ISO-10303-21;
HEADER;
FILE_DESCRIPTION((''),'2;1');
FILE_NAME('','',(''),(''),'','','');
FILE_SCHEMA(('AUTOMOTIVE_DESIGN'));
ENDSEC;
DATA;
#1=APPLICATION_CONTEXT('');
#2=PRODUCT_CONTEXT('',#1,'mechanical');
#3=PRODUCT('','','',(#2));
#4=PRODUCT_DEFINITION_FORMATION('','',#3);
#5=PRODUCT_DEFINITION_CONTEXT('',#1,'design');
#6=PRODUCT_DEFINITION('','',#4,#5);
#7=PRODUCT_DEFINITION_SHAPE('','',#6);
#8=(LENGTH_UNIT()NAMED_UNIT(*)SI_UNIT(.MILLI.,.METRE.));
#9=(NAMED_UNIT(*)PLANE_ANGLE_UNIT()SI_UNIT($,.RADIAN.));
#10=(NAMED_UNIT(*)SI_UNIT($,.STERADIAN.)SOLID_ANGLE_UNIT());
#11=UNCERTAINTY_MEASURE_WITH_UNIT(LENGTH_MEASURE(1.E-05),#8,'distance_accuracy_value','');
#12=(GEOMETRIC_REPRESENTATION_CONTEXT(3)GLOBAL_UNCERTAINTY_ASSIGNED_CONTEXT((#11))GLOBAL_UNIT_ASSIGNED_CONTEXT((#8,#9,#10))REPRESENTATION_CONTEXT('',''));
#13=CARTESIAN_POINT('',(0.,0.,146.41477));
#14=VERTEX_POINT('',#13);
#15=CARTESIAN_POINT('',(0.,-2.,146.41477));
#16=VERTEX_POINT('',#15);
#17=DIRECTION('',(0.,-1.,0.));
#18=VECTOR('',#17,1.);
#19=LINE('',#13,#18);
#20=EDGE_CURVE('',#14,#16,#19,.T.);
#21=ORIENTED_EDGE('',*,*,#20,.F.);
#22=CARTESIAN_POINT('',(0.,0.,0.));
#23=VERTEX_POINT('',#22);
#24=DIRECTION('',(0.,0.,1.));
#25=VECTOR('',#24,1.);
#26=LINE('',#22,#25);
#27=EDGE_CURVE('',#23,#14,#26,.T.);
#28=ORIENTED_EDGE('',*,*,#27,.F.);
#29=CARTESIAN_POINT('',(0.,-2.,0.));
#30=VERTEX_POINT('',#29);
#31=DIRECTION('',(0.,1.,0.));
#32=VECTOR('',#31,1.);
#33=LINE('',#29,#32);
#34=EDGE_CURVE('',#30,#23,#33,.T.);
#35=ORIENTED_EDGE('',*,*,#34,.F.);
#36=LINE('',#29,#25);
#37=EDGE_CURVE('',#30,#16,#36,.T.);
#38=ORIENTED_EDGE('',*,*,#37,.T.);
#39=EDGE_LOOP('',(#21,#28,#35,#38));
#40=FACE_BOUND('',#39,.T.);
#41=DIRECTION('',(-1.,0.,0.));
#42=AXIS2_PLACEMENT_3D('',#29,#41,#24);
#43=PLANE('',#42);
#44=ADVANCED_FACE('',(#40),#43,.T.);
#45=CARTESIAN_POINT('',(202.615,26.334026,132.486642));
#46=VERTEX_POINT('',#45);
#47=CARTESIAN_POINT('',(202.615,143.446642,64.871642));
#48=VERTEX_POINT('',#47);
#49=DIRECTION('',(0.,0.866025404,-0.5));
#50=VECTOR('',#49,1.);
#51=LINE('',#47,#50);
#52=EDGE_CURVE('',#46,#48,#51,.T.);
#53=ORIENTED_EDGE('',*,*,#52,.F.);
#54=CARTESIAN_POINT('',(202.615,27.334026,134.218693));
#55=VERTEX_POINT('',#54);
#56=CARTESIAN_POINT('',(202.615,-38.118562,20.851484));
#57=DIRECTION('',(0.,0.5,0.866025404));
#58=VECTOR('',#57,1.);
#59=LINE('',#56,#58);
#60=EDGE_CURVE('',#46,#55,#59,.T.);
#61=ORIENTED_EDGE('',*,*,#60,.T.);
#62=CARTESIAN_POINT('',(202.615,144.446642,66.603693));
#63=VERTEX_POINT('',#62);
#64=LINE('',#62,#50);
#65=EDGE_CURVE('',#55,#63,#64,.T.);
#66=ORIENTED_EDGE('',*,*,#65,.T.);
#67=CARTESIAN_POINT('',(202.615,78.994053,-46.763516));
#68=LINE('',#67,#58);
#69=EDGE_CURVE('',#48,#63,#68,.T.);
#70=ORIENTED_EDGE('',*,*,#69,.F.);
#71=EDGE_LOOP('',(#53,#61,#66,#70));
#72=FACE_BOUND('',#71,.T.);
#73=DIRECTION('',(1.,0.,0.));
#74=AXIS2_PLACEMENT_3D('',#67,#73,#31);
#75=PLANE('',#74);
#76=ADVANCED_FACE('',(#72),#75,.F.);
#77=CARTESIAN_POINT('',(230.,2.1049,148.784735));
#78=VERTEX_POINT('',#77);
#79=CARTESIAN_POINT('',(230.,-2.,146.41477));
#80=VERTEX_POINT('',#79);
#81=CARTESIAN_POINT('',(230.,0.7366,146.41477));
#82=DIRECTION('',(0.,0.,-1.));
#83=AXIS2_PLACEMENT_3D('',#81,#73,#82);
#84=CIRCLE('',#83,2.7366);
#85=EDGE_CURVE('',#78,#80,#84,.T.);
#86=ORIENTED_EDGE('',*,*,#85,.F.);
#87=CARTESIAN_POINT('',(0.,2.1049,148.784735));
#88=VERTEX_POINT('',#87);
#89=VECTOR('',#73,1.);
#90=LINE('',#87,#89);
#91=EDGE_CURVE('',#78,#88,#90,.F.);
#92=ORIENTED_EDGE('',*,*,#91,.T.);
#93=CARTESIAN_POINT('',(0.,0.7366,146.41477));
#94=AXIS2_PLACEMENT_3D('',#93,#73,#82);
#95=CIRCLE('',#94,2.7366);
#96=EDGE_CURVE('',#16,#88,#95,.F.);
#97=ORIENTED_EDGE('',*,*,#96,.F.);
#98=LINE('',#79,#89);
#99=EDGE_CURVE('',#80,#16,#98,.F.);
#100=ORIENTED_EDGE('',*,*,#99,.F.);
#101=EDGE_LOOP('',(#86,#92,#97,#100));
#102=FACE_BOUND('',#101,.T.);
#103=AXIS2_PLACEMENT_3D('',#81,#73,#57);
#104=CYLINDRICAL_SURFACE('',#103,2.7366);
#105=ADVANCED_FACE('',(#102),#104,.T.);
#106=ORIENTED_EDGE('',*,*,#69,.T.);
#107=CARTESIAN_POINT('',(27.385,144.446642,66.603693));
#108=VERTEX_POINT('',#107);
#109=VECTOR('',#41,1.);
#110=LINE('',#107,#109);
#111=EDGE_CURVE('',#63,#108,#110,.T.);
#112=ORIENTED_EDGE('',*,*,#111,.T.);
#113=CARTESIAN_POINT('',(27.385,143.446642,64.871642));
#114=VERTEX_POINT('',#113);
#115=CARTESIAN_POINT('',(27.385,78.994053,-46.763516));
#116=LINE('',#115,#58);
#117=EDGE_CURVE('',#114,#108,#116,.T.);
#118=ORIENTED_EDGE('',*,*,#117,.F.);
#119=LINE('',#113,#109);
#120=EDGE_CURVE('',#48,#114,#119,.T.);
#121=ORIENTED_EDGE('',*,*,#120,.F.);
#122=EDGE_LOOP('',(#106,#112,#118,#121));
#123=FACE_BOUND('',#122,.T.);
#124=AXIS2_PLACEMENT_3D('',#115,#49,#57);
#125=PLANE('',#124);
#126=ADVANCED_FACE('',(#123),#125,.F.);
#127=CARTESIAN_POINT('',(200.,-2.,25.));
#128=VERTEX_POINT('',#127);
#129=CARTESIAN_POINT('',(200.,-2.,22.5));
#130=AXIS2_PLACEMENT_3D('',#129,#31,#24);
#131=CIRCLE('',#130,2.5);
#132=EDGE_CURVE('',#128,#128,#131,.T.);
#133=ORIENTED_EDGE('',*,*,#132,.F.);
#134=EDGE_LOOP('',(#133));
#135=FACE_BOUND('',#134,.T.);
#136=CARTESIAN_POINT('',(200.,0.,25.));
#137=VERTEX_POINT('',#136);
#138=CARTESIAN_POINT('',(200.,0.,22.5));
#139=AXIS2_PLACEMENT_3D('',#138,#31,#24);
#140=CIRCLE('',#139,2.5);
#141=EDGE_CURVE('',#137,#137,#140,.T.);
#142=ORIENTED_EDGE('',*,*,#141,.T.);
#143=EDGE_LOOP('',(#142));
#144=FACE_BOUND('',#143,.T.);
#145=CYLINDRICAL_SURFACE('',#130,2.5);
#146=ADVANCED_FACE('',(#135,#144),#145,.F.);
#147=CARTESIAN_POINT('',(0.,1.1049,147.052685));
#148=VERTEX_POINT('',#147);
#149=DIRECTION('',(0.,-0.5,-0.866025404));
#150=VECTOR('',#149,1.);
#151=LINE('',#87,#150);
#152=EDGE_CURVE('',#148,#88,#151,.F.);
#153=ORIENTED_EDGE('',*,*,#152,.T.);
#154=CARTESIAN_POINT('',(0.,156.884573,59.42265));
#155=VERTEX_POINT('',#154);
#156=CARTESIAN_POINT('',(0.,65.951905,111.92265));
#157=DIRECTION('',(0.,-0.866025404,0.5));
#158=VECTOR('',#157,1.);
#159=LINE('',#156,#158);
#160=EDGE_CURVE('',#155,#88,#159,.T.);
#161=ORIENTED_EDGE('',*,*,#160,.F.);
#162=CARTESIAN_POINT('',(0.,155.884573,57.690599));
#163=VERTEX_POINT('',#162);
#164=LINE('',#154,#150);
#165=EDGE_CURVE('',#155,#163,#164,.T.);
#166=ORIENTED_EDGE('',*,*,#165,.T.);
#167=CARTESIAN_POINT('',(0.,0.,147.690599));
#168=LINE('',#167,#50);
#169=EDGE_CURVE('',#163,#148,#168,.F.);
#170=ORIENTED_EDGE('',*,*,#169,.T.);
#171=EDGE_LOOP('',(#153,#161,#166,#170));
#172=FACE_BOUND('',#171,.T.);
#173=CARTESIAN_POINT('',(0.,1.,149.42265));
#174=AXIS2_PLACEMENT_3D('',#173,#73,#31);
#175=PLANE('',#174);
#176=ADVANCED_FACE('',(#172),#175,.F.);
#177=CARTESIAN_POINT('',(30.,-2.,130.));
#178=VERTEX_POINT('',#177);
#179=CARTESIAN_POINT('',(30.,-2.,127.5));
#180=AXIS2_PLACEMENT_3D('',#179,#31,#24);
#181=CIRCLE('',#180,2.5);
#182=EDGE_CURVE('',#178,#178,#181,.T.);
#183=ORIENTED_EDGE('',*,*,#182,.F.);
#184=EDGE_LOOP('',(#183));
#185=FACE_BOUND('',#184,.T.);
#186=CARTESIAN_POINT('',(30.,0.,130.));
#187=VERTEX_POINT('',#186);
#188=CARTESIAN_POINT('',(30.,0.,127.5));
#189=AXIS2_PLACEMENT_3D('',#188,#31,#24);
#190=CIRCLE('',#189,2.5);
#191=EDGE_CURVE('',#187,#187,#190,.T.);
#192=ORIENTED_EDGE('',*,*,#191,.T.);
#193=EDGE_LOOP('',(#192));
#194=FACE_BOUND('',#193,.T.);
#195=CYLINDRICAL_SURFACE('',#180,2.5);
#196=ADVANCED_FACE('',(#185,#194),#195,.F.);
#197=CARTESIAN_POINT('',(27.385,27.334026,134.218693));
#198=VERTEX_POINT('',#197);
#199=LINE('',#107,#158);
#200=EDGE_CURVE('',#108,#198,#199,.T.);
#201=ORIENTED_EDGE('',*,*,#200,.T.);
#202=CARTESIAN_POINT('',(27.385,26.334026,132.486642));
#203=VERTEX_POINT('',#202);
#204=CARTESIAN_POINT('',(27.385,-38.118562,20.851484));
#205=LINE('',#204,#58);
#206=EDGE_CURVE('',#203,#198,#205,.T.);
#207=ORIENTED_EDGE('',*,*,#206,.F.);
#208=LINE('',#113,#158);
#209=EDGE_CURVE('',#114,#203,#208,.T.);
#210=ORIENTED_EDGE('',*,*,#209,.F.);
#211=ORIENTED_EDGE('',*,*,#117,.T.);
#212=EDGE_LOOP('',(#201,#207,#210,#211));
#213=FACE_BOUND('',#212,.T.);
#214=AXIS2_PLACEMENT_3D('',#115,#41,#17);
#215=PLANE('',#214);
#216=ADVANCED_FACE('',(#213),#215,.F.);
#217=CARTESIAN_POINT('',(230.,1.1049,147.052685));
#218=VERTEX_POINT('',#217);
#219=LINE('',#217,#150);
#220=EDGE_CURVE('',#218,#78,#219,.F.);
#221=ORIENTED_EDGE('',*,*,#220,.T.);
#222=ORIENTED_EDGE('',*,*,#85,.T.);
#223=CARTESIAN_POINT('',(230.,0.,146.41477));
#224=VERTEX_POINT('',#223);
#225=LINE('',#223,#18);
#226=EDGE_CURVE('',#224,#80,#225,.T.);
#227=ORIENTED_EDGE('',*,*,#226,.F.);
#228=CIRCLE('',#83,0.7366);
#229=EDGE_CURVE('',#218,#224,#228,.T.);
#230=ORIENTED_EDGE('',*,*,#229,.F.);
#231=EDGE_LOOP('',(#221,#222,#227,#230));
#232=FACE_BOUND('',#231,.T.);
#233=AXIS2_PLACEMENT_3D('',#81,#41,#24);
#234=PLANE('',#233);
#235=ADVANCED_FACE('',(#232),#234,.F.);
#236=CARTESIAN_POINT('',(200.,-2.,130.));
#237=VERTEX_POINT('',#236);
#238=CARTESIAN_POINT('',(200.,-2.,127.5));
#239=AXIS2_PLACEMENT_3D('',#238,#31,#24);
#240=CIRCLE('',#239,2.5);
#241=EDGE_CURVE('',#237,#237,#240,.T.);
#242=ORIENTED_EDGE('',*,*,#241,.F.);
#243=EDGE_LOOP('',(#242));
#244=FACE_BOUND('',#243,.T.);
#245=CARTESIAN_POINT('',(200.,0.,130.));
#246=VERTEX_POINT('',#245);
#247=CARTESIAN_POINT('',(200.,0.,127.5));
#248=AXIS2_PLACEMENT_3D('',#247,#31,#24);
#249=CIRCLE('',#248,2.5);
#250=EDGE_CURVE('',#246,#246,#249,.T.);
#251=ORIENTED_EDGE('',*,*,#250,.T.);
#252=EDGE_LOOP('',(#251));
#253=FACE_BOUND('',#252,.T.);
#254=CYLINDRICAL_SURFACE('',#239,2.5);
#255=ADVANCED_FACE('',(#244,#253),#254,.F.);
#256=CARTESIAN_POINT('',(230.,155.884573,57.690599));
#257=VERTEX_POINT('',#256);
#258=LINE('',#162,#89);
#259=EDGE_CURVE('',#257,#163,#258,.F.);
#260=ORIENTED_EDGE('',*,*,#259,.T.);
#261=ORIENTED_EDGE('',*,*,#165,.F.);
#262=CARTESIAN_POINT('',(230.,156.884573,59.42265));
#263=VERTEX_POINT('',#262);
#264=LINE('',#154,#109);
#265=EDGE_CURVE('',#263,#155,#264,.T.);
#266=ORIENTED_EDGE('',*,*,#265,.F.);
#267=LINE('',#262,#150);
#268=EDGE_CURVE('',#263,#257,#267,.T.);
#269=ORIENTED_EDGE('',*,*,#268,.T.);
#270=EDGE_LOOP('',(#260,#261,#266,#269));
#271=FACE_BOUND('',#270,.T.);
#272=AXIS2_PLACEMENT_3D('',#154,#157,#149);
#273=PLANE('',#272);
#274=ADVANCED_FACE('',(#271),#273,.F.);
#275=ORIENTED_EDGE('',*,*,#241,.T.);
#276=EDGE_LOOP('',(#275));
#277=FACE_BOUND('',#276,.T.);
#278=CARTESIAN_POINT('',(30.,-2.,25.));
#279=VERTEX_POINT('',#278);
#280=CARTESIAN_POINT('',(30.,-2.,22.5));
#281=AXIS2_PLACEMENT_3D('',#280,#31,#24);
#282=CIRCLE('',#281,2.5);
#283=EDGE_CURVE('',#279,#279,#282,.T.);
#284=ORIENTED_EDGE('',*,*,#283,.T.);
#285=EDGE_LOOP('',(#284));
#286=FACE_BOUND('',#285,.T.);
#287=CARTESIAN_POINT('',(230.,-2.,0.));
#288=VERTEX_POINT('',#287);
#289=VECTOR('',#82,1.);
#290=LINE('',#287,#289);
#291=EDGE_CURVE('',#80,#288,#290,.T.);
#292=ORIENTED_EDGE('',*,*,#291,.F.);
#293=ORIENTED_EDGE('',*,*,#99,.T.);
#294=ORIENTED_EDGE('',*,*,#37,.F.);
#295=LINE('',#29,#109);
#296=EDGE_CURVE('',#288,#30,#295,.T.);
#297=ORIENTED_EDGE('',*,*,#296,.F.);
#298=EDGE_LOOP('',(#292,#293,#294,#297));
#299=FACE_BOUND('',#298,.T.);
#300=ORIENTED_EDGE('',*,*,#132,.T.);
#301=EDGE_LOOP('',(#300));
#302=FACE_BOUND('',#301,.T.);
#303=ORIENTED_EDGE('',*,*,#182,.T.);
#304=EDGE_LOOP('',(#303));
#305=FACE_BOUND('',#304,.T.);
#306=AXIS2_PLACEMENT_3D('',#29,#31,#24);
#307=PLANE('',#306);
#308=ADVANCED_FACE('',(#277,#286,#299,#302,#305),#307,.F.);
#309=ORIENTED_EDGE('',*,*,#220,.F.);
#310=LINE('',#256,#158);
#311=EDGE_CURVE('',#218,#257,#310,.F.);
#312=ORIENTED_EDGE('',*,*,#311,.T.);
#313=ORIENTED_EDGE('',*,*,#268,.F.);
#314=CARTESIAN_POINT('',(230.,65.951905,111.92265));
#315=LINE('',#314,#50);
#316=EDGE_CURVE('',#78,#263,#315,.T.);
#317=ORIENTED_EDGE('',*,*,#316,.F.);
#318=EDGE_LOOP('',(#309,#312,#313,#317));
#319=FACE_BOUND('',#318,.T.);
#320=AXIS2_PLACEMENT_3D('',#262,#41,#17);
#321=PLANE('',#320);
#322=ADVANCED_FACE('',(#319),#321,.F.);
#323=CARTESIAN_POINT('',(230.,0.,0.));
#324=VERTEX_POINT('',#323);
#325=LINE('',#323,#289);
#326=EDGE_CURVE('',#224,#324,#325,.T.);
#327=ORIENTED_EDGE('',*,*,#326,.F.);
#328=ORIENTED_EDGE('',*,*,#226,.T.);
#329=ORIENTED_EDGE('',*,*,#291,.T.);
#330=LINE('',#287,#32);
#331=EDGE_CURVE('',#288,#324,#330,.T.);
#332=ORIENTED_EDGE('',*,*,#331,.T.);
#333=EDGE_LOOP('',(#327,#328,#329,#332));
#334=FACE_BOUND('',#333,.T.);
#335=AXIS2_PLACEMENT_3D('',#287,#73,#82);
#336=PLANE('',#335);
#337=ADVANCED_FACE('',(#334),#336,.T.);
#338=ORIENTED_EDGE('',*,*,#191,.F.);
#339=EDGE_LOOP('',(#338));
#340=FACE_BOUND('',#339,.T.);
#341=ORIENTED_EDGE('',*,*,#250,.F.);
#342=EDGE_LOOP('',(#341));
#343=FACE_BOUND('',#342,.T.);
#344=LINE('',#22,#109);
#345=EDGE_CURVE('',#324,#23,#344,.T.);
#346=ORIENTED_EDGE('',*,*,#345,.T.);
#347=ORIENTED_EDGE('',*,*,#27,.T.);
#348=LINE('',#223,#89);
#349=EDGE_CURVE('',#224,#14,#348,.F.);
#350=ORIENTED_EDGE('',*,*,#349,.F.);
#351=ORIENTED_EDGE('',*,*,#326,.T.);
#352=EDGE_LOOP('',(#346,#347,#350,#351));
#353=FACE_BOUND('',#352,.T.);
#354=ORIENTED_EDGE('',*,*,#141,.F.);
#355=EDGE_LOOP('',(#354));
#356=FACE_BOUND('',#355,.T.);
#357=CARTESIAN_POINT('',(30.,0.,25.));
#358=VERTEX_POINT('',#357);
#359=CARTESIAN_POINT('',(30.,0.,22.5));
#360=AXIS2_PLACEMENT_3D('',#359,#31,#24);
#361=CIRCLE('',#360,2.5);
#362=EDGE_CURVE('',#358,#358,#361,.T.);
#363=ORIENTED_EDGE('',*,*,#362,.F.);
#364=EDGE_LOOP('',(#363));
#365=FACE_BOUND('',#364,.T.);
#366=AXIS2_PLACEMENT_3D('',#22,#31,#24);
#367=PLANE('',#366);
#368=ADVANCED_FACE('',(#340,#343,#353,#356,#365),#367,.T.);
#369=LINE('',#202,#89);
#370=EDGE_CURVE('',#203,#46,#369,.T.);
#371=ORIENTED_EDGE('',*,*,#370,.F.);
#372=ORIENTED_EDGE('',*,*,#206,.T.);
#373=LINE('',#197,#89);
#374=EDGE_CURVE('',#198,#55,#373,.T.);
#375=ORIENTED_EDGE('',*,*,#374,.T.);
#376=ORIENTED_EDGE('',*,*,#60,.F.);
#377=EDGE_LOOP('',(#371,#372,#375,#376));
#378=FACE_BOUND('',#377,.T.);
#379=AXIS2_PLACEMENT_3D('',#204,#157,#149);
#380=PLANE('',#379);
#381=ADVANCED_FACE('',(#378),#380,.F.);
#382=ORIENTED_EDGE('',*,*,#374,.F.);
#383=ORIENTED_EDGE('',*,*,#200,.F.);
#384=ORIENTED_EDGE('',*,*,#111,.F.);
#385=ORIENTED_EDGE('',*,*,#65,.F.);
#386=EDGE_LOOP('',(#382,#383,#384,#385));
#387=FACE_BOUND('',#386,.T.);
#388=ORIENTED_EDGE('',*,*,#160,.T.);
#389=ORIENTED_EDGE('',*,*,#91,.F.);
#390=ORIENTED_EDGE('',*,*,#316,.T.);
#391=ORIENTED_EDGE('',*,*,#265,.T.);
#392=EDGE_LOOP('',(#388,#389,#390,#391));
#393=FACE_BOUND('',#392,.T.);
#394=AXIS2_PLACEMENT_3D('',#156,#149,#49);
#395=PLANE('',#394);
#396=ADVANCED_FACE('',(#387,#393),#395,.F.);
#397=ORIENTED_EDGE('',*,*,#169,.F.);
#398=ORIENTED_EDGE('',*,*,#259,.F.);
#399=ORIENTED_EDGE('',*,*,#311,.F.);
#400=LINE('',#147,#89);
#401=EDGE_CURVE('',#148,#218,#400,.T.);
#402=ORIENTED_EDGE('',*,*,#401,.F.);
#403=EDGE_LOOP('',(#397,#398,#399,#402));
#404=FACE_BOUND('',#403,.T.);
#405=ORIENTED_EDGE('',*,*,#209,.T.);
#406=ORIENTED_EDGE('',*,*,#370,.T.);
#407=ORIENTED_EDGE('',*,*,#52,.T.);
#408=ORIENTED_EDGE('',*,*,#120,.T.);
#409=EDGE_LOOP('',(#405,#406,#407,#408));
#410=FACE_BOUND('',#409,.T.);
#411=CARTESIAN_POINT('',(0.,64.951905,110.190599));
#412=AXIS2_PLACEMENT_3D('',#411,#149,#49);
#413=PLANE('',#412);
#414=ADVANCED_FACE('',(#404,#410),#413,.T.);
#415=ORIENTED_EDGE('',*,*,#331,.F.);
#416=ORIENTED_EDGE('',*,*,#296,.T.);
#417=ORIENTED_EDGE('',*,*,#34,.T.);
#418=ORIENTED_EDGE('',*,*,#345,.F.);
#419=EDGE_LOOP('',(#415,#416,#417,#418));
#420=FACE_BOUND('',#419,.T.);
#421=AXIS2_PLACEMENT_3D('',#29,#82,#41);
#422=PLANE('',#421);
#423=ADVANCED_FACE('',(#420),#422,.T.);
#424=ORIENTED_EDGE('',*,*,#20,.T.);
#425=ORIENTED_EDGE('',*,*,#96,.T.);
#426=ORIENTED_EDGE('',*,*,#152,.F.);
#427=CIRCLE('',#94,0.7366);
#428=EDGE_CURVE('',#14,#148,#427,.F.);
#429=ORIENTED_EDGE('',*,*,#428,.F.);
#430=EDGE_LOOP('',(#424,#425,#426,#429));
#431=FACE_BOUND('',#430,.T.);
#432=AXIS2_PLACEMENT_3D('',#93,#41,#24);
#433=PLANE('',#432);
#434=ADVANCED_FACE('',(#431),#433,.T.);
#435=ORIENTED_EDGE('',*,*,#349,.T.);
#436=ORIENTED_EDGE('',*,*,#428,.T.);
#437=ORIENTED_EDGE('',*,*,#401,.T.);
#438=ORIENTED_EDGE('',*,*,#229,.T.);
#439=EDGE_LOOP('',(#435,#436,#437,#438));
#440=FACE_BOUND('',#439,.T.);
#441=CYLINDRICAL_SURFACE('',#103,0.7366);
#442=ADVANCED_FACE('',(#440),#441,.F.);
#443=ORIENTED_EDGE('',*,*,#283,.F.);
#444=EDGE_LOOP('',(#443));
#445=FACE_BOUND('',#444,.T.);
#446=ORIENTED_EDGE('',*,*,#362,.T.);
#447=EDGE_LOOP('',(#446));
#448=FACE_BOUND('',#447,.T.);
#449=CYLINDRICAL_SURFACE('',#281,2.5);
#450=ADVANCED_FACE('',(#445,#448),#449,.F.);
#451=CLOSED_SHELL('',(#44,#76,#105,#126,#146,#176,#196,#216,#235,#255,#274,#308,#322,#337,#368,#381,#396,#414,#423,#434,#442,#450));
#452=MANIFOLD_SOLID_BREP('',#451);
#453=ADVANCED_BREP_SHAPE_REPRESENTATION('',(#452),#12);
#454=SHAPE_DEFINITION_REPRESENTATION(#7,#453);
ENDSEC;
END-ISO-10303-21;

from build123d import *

# Parameters (mm, degrees)
ESBO_O1_W              = 230
ESBO_O1_H              = 150
ESBO_O1_R              = 2.5
FLANGE_BASE1_DEPTH     = 2
ARESTA_FLANGE1_DEPTH   = 230
ARESTA_FLANGE1_2_DEPTH = 230
CORTE_EXTRUS_O1_REACH  = 274.044
ESBO_O11_W             = 175.23
ESBO_O11_H             = 135.23


# Read off the part's stored shape, not the designer's step: Aresta-Flange1
# Sheet-metal steps are written as plain solids
with BuildPart() as part:
    # Esboço1 → Flange-base1 (new body)
    with BuildSketch(Plane(origin=(0, 0, 0), x_dir=(1, 0, 0), z_dir=(0, 1, 0))):
        with Locations((115, -75)):
            Rectangle(ESBO_O1_W, ESBO_O1_H)
        with Locations(Location((30, -22.5, 0), (0, 0, 270))):
            Circle(ESBO_O1_R, mode=Mode.SUBTRACT)
        with Locations(Location((30, -127.5, 0), (0, 0, 270))):
            Circle(ESBO_O1_R, mode=Mode.SUBTRACT)
        with Locations(Location((200, -127.5, 0), (0, 0, 270))):
            Circle(ESBO_O1_R, mode=Mode.SUBTRACT)
        with Locations(Location((200, -22.5, 0), (0, 0, 270))):
            Circle(ESBO_O1_R, mode=Mode.SUBTRACT)
    extrude(amount=-FLANGE_BASE1_DEPTH)

    # Aresta-Flange1 outline → Aresta-Flange1 (cut)
    with BuildSketch(Plane.YZ):
        with BuildLine():
            ThreePointArc((-2, 146.414770298), (-1.443395312, 148.069037507), (0, 149.050372696))
            Line((0, 149.050372696), (0, 150))
            Line((0, 150), (-2, 150))
            Line((-2, 150), (-2, 146.414770298))
        make_face()
    extrude(amount=ARESTA_FLANGE1_DEPTH, mode=Mode.SUBTRACT)

    # Aresta-Flange1 2 outline → Aresta-Flange1 2 (add)
    with BuildSketch(Plane.YZ):
        with BuildLine():
            Line((156.884572681, 59.422649731), (2.1049, 148.784735418))
            ThreePointArc((2.1049, 148.784735418), (1.079239772, 149.129835223), (0, 149.050372696))
            Line((0, 149.050372696), (0, 146.414770298))
            ThreePointArc((0, 146.414770298), (0.3683, 147.052684611), (1.1049, 147.052684611))
            Line((1.1049, 147.052684611), (155.884572681, 57.690598923))
            Line((155.884572681, 57.690598923), (156.884572681, 59.422649731))
        make_face()
    extrude(amount=ARESTA_FLANGE1_2_DEPTH)

    # Esboço11 → Corte-extrusão1 (cut, up to next)
    with BuildSketch(Plane(origin=(0, 64.951905284, 112.5), x_dir=(1, 0, 0), z_dir=(0, 0.499999999999998, 0.8660254037844398)), mode=Mode.PRIVATE) as corte_extrus_o1_sk1:
        with Locations((115, 24.177614851)):
            Rectangle(ESBO_O11_W, ESBO_O11_H)
    corte_extrus_o1_tool1 = extrude(corte_extrus_o1_sk1.sketch, amount=-CORTE_EXTRUS_O1_REACH, mode=Mode.PRIVATE) & part.part
    add(corte_extrus_o1_tool1.solids().sort_by_distance((115, 85.890334, 100.411193))[0], mode=Mode.SUBTRACT)


solid = part.part
